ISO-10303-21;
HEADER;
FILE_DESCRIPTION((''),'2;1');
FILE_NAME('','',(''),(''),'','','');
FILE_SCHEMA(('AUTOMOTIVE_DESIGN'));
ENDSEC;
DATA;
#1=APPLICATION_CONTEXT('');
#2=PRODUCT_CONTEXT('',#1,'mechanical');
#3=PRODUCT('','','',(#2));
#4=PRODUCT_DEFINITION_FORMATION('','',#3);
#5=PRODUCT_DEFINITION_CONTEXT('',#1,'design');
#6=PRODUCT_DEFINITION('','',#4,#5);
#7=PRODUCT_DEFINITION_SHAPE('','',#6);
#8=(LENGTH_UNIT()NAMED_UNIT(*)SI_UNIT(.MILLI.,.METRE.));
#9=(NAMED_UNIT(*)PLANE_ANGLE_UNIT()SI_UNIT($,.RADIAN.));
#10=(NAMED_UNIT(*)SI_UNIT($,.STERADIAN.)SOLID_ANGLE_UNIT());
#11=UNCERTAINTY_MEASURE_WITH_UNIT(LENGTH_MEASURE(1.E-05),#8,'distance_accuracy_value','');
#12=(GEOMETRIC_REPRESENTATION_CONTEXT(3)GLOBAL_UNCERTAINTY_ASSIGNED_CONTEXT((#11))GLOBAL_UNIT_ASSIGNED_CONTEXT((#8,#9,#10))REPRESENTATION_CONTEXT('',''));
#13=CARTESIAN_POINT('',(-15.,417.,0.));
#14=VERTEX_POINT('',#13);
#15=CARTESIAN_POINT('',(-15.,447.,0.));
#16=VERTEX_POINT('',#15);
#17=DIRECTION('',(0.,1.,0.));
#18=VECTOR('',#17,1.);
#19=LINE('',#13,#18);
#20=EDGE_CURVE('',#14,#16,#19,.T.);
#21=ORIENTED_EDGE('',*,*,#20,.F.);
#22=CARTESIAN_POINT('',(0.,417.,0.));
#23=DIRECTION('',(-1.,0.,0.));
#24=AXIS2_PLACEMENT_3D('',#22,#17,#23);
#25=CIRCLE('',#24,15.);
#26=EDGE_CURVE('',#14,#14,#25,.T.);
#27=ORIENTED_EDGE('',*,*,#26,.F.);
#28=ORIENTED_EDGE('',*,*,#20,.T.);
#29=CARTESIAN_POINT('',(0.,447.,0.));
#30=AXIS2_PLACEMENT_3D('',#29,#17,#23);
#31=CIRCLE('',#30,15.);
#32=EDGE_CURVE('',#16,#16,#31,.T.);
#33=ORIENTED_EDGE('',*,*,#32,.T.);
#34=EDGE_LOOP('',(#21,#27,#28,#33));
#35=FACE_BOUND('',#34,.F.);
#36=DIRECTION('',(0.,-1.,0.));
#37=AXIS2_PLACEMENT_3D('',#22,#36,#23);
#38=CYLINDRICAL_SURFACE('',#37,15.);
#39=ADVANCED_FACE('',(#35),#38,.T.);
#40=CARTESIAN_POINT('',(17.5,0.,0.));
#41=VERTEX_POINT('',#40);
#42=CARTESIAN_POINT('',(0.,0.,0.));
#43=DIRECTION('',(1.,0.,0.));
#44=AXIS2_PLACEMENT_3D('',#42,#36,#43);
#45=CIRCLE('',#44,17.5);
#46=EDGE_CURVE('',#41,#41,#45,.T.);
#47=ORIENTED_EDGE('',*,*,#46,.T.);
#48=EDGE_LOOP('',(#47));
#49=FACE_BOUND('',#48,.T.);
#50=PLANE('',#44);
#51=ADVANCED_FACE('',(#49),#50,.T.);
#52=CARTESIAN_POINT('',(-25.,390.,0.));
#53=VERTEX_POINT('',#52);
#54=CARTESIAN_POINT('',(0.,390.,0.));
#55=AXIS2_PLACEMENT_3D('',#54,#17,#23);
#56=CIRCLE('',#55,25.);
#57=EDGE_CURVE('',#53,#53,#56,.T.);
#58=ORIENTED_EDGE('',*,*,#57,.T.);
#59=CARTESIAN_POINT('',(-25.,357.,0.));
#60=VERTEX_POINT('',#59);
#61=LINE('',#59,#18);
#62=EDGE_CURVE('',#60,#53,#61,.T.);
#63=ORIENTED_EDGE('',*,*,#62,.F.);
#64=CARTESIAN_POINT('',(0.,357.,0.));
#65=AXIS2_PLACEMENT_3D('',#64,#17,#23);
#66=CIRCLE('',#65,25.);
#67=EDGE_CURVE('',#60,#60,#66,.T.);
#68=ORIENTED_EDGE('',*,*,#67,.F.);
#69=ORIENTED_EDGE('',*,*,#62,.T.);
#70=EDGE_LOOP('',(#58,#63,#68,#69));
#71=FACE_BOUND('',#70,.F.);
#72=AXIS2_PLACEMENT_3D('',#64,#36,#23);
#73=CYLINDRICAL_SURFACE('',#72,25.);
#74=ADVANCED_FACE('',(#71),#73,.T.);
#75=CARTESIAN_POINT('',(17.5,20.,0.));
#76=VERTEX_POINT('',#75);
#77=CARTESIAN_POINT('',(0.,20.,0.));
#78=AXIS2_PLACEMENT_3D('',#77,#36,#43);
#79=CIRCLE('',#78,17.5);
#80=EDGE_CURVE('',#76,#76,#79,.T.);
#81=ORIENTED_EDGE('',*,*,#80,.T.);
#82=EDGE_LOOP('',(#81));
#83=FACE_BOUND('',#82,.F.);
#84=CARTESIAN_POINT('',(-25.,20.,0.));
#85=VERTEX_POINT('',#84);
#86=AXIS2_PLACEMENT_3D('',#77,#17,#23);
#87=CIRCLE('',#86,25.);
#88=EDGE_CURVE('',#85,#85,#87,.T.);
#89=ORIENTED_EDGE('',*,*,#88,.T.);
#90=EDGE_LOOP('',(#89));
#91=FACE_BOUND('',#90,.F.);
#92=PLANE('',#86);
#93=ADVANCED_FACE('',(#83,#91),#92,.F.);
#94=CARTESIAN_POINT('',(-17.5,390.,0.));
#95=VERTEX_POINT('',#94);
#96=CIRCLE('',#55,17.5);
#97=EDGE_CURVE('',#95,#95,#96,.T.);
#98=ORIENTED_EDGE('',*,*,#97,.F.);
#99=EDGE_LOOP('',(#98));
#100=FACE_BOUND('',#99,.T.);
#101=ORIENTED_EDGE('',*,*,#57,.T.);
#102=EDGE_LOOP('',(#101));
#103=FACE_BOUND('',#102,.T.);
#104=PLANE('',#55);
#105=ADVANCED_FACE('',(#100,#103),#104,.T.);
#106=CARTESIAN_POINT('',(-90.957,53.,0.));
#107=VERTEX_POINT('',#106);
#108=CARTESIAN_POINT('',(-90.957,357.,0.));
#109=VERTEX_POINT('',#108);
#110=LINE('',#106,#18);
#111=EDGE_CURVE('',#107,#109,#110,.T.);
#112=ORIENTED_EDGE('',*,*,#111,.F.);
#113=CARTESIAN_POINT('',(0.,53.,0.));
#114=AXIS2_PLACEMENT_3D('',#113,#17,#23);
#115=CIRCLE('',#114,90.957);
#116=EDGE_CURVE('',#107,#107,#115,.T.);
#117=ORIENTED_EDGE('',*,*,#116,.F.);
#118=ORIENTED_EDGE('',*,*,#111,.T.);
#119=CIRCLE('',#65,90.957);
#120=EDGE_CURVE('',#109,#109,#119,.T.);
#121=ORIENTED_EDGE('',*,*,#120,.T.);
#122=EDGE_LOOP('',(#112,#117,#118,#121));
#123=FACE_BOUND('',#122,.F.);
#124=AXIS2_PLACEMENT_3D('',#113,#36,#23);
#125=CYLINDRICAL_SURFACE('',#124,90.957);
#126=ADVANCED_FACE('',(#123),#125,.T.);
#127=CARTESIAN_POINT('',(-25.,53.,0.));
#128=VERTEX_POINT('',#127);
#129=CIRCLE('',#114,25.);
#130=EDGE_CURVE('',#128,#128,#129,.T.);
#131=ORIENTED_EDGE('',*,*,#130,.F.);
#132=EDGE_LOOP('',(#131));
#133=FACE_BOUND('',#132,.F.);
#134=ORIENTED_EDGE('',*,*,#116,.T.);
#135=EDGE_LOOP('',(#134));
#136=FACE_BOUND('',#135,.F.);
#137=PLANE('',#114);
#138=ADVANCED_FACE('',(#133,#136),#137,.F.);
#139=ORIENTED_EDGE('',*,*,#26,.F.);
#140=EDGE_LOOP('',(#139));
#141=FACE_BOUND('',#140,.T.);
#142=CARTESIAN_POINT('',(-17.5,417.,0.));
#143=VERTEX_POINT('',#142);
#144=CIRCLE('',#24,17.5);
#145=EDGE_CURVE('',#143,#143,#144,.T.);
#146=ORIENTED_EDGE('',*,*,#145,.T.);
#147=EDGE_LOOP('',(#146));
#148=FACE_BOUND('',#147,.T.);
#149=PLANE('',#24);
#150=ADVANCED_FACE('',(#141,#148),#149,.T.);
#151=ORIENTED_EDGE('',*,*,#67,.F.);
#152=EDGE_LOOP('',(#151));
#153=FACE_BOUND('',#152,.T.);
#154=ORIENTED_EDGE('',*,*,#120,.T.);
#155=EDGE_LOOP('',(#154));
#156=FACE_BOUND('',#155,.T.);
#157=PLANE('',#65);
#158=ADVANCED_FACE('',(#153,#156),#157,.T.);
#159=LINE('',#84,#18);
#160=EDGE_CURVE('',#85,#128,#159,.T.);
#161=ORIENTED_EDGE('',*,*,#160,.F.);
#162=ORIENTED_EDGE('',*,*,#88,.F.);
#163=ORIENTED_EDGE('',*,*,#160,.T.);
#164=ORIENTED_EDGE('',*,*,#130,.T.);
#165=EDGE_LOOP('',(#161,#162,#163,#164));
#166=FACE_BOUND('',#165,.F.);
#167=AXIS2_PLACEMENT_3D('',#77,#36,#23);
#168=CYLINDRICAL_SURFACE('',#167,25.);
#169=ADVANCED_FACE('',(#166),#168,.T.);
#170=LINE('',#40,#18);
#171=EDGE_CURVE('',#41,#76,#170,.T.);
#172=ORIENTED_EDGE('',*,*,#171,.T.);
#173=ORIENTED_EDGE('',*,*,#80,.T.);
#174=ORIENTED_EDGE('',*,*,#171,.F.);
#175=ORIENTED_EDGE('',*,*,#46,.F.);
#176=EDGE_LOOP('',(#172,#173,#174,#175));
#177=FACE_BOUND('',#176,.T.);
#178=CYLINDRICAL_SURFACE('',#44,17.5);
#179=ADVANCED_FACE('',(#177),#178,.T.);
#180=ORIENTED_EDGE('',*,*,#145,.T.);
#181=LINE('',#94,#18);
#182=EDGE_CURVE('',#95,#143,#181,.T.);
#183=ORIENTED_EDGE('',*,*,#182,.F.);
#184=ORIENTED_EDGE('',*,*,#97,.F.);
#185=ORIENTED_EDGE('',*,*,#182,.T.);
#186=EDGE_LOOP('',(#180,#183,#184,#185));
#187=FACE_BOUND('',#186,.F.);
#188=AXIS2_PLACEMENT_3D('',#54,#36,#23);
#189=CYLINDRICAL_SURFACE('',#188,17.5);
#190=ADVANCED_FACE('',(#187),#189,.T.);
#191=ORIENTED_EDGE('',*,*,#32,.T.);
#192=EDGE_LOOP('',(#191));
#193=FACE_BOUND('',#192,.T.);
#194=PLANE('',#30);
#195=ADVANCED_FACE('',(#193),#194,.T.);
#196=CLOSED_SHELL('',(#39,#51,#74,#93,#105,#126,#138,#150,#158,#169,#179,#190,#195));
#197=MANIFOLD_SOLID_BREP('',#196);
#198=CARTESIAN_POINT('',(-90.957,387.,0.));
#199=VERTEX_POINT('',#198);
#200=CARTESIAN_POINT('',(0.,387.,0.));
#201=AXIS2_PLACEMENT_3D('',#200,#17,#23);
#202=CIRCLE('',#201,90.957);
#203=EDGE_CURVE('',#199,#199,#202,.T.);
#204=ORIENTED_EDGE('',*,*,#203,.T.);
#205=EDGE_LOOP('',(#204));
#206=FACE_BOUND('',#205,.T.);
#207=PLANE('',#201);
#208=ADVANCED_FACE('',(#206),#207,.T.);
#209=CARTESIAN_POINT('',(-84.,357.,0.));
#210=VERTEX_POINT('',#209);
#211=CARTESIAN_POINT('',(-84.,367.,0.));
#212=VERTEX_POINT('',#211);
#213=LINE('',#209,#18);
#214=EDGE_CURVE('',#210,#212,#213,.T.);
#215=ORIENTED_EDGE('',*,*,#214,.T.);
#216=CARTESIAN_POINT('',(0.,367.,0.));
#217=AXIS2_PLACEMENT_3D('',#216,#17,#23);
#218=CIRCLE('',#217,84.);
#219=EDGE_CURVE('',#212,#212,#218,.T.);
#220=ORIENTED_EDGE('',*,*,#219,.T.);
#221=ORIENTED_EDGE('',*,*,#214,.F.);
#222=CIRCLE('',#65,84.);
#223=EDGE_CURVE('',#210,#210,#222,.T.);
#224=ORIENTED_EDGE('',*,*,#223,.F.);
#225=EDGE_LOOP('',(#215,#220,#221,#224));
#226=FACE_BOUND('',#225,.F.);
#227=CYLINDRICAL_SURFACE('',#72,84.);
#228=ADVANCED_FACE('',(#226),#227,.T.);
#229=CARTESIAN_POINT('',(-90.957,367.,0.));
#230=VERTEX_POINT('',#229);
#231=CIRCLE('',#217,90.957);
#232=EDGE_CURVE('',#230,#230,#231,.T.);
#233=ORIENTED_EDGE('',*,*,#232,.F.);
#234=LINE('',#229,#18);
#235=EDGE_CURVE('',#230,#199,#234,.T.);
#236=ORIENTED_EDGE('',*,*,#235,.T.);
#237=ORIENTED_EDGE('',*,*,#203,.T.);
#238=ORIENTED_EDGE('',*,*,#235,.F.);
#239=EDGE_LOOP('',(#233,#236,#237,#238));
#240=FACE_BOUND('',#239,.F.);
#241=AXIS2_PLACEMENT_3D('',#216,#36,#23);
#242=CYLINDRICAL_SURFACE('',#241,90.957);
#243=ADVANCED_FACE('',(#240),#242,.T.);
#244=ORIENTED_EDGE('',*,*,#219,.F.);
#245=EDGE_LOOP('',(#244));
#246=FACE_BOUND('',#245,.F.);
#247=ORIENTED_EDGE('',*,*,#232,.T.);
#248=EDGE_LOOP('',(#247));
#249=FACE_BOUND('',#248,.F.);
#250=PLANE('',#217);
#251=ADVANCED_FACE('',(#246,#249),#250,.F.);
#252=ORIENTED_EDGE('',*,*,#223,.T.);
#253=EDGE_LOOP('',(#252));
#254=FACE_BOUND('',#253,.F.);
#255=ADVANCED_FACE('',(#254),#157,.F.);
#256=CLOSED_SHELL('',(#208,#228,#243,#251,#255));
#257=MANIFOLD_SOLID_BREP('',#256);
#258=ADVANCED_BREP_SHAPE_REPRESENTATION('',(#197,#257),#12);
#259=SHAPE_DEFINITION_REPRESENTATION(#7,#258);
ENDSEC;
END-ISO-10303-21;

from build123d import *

# Parameters (mm, degrees)
F0_R      = 17.5
F1_DEPTH  = 20
F2_R      = 25
F2_R_2    = 17.5
F3_DEPTH  = 33
F4_R      = 90.957
F4_R_2    = 25
F5_DEPTH  = 304
F6_R      = 84
F7_DEPTH  = 10
F8_R      = 90.957
F8_R_2    = 84
F9_DEPTH  = 20
F10_R     = 25
F11_DEPTH = 33
F12_R     = 17.5
F13_DEPTH = 27
F14_R     = 15
F15_DEPTH = 30


with BuildPart() as f1:
    # F0 (on Front) → F1 (new body)
    with BuildSketch(Plane.XZ):
        Circle(F0_R)
    extrude(amount=-F1_DEPTH)

    # F2 (on face) → F3 (join)
    with BuildSketch(Plane(origin=(0, 20, 0), x_dir=(-1, 0, 0), z_dir=(0, 1, 0))):
        Circle(F2_R)
        Circle(F2_R_2, mode=Mode.SUBTRACT)
        Circle(F2_R_2)
    extrude(amount=F3_DEPTH)

    # F4 (on face) → F5 (join)
    with BuildSketch(Plane(origin=(0, 53, 0), x_dir=(-1, 0, 0), z_dir=(0, 1, 0))):
        Circle(F4_R)
        Circle(F4_R_2, mode=Mode.SUBTRACT)
        Circle(F4_R_2)
    extrude(amount=F5_DEPTH)

    # F10 (on face) → F11 (join)
    with BuildSketch(Plane(origin=(0, 357, 0), x_dir=(-1, 0, 0), z_dir=(0, 1, 0))):
        Circle(F10_R)
    extrude(amount=F11_DEPTH)

    # F12 (on face) → F13 (join)
    with BuildSketch(Plane(origin=(0, 390, 0), x_dir=(-1, 0, 0), z_dir=(0, 1, 0))):
        Circle(F12_R)
    extrude(amount=F13_DEPTH)

    # F14 (on face) → F15 (join)
    with BuildSketch(Plane(origin=(0, 417, 0), x_dir=(-1, 0, 0), z_dir=(0, 1, 0))):
        Circle(F14_R)
    extrude(amount=F15_DEPTH)


with BuildPart() as f7:
    # F6 (on face) → F7 (new body)
    with BuildSketch(Plane(origin=(0, 357, 0), x_dir=(-1, 0, 0), z_dir=(0, 1, 0))):
        Circle(F6_R)
    extrude(amount=F7_DEPTH)

    # F8 (on face) → F9 (join)
    with BuildSketch(Plane(origin=(0, 367, 0), x_dir=(-1, 0, 0), z_dir=(0, 1, 0))):
        Circle(F8_R)
        Circle(F8_R_2, mode=Mode.SUBTRACT)
        Circle(F8_R_2)
    extrude(amount=F9_DEPTH)


solid = Compound([f1.part, f7.part])
